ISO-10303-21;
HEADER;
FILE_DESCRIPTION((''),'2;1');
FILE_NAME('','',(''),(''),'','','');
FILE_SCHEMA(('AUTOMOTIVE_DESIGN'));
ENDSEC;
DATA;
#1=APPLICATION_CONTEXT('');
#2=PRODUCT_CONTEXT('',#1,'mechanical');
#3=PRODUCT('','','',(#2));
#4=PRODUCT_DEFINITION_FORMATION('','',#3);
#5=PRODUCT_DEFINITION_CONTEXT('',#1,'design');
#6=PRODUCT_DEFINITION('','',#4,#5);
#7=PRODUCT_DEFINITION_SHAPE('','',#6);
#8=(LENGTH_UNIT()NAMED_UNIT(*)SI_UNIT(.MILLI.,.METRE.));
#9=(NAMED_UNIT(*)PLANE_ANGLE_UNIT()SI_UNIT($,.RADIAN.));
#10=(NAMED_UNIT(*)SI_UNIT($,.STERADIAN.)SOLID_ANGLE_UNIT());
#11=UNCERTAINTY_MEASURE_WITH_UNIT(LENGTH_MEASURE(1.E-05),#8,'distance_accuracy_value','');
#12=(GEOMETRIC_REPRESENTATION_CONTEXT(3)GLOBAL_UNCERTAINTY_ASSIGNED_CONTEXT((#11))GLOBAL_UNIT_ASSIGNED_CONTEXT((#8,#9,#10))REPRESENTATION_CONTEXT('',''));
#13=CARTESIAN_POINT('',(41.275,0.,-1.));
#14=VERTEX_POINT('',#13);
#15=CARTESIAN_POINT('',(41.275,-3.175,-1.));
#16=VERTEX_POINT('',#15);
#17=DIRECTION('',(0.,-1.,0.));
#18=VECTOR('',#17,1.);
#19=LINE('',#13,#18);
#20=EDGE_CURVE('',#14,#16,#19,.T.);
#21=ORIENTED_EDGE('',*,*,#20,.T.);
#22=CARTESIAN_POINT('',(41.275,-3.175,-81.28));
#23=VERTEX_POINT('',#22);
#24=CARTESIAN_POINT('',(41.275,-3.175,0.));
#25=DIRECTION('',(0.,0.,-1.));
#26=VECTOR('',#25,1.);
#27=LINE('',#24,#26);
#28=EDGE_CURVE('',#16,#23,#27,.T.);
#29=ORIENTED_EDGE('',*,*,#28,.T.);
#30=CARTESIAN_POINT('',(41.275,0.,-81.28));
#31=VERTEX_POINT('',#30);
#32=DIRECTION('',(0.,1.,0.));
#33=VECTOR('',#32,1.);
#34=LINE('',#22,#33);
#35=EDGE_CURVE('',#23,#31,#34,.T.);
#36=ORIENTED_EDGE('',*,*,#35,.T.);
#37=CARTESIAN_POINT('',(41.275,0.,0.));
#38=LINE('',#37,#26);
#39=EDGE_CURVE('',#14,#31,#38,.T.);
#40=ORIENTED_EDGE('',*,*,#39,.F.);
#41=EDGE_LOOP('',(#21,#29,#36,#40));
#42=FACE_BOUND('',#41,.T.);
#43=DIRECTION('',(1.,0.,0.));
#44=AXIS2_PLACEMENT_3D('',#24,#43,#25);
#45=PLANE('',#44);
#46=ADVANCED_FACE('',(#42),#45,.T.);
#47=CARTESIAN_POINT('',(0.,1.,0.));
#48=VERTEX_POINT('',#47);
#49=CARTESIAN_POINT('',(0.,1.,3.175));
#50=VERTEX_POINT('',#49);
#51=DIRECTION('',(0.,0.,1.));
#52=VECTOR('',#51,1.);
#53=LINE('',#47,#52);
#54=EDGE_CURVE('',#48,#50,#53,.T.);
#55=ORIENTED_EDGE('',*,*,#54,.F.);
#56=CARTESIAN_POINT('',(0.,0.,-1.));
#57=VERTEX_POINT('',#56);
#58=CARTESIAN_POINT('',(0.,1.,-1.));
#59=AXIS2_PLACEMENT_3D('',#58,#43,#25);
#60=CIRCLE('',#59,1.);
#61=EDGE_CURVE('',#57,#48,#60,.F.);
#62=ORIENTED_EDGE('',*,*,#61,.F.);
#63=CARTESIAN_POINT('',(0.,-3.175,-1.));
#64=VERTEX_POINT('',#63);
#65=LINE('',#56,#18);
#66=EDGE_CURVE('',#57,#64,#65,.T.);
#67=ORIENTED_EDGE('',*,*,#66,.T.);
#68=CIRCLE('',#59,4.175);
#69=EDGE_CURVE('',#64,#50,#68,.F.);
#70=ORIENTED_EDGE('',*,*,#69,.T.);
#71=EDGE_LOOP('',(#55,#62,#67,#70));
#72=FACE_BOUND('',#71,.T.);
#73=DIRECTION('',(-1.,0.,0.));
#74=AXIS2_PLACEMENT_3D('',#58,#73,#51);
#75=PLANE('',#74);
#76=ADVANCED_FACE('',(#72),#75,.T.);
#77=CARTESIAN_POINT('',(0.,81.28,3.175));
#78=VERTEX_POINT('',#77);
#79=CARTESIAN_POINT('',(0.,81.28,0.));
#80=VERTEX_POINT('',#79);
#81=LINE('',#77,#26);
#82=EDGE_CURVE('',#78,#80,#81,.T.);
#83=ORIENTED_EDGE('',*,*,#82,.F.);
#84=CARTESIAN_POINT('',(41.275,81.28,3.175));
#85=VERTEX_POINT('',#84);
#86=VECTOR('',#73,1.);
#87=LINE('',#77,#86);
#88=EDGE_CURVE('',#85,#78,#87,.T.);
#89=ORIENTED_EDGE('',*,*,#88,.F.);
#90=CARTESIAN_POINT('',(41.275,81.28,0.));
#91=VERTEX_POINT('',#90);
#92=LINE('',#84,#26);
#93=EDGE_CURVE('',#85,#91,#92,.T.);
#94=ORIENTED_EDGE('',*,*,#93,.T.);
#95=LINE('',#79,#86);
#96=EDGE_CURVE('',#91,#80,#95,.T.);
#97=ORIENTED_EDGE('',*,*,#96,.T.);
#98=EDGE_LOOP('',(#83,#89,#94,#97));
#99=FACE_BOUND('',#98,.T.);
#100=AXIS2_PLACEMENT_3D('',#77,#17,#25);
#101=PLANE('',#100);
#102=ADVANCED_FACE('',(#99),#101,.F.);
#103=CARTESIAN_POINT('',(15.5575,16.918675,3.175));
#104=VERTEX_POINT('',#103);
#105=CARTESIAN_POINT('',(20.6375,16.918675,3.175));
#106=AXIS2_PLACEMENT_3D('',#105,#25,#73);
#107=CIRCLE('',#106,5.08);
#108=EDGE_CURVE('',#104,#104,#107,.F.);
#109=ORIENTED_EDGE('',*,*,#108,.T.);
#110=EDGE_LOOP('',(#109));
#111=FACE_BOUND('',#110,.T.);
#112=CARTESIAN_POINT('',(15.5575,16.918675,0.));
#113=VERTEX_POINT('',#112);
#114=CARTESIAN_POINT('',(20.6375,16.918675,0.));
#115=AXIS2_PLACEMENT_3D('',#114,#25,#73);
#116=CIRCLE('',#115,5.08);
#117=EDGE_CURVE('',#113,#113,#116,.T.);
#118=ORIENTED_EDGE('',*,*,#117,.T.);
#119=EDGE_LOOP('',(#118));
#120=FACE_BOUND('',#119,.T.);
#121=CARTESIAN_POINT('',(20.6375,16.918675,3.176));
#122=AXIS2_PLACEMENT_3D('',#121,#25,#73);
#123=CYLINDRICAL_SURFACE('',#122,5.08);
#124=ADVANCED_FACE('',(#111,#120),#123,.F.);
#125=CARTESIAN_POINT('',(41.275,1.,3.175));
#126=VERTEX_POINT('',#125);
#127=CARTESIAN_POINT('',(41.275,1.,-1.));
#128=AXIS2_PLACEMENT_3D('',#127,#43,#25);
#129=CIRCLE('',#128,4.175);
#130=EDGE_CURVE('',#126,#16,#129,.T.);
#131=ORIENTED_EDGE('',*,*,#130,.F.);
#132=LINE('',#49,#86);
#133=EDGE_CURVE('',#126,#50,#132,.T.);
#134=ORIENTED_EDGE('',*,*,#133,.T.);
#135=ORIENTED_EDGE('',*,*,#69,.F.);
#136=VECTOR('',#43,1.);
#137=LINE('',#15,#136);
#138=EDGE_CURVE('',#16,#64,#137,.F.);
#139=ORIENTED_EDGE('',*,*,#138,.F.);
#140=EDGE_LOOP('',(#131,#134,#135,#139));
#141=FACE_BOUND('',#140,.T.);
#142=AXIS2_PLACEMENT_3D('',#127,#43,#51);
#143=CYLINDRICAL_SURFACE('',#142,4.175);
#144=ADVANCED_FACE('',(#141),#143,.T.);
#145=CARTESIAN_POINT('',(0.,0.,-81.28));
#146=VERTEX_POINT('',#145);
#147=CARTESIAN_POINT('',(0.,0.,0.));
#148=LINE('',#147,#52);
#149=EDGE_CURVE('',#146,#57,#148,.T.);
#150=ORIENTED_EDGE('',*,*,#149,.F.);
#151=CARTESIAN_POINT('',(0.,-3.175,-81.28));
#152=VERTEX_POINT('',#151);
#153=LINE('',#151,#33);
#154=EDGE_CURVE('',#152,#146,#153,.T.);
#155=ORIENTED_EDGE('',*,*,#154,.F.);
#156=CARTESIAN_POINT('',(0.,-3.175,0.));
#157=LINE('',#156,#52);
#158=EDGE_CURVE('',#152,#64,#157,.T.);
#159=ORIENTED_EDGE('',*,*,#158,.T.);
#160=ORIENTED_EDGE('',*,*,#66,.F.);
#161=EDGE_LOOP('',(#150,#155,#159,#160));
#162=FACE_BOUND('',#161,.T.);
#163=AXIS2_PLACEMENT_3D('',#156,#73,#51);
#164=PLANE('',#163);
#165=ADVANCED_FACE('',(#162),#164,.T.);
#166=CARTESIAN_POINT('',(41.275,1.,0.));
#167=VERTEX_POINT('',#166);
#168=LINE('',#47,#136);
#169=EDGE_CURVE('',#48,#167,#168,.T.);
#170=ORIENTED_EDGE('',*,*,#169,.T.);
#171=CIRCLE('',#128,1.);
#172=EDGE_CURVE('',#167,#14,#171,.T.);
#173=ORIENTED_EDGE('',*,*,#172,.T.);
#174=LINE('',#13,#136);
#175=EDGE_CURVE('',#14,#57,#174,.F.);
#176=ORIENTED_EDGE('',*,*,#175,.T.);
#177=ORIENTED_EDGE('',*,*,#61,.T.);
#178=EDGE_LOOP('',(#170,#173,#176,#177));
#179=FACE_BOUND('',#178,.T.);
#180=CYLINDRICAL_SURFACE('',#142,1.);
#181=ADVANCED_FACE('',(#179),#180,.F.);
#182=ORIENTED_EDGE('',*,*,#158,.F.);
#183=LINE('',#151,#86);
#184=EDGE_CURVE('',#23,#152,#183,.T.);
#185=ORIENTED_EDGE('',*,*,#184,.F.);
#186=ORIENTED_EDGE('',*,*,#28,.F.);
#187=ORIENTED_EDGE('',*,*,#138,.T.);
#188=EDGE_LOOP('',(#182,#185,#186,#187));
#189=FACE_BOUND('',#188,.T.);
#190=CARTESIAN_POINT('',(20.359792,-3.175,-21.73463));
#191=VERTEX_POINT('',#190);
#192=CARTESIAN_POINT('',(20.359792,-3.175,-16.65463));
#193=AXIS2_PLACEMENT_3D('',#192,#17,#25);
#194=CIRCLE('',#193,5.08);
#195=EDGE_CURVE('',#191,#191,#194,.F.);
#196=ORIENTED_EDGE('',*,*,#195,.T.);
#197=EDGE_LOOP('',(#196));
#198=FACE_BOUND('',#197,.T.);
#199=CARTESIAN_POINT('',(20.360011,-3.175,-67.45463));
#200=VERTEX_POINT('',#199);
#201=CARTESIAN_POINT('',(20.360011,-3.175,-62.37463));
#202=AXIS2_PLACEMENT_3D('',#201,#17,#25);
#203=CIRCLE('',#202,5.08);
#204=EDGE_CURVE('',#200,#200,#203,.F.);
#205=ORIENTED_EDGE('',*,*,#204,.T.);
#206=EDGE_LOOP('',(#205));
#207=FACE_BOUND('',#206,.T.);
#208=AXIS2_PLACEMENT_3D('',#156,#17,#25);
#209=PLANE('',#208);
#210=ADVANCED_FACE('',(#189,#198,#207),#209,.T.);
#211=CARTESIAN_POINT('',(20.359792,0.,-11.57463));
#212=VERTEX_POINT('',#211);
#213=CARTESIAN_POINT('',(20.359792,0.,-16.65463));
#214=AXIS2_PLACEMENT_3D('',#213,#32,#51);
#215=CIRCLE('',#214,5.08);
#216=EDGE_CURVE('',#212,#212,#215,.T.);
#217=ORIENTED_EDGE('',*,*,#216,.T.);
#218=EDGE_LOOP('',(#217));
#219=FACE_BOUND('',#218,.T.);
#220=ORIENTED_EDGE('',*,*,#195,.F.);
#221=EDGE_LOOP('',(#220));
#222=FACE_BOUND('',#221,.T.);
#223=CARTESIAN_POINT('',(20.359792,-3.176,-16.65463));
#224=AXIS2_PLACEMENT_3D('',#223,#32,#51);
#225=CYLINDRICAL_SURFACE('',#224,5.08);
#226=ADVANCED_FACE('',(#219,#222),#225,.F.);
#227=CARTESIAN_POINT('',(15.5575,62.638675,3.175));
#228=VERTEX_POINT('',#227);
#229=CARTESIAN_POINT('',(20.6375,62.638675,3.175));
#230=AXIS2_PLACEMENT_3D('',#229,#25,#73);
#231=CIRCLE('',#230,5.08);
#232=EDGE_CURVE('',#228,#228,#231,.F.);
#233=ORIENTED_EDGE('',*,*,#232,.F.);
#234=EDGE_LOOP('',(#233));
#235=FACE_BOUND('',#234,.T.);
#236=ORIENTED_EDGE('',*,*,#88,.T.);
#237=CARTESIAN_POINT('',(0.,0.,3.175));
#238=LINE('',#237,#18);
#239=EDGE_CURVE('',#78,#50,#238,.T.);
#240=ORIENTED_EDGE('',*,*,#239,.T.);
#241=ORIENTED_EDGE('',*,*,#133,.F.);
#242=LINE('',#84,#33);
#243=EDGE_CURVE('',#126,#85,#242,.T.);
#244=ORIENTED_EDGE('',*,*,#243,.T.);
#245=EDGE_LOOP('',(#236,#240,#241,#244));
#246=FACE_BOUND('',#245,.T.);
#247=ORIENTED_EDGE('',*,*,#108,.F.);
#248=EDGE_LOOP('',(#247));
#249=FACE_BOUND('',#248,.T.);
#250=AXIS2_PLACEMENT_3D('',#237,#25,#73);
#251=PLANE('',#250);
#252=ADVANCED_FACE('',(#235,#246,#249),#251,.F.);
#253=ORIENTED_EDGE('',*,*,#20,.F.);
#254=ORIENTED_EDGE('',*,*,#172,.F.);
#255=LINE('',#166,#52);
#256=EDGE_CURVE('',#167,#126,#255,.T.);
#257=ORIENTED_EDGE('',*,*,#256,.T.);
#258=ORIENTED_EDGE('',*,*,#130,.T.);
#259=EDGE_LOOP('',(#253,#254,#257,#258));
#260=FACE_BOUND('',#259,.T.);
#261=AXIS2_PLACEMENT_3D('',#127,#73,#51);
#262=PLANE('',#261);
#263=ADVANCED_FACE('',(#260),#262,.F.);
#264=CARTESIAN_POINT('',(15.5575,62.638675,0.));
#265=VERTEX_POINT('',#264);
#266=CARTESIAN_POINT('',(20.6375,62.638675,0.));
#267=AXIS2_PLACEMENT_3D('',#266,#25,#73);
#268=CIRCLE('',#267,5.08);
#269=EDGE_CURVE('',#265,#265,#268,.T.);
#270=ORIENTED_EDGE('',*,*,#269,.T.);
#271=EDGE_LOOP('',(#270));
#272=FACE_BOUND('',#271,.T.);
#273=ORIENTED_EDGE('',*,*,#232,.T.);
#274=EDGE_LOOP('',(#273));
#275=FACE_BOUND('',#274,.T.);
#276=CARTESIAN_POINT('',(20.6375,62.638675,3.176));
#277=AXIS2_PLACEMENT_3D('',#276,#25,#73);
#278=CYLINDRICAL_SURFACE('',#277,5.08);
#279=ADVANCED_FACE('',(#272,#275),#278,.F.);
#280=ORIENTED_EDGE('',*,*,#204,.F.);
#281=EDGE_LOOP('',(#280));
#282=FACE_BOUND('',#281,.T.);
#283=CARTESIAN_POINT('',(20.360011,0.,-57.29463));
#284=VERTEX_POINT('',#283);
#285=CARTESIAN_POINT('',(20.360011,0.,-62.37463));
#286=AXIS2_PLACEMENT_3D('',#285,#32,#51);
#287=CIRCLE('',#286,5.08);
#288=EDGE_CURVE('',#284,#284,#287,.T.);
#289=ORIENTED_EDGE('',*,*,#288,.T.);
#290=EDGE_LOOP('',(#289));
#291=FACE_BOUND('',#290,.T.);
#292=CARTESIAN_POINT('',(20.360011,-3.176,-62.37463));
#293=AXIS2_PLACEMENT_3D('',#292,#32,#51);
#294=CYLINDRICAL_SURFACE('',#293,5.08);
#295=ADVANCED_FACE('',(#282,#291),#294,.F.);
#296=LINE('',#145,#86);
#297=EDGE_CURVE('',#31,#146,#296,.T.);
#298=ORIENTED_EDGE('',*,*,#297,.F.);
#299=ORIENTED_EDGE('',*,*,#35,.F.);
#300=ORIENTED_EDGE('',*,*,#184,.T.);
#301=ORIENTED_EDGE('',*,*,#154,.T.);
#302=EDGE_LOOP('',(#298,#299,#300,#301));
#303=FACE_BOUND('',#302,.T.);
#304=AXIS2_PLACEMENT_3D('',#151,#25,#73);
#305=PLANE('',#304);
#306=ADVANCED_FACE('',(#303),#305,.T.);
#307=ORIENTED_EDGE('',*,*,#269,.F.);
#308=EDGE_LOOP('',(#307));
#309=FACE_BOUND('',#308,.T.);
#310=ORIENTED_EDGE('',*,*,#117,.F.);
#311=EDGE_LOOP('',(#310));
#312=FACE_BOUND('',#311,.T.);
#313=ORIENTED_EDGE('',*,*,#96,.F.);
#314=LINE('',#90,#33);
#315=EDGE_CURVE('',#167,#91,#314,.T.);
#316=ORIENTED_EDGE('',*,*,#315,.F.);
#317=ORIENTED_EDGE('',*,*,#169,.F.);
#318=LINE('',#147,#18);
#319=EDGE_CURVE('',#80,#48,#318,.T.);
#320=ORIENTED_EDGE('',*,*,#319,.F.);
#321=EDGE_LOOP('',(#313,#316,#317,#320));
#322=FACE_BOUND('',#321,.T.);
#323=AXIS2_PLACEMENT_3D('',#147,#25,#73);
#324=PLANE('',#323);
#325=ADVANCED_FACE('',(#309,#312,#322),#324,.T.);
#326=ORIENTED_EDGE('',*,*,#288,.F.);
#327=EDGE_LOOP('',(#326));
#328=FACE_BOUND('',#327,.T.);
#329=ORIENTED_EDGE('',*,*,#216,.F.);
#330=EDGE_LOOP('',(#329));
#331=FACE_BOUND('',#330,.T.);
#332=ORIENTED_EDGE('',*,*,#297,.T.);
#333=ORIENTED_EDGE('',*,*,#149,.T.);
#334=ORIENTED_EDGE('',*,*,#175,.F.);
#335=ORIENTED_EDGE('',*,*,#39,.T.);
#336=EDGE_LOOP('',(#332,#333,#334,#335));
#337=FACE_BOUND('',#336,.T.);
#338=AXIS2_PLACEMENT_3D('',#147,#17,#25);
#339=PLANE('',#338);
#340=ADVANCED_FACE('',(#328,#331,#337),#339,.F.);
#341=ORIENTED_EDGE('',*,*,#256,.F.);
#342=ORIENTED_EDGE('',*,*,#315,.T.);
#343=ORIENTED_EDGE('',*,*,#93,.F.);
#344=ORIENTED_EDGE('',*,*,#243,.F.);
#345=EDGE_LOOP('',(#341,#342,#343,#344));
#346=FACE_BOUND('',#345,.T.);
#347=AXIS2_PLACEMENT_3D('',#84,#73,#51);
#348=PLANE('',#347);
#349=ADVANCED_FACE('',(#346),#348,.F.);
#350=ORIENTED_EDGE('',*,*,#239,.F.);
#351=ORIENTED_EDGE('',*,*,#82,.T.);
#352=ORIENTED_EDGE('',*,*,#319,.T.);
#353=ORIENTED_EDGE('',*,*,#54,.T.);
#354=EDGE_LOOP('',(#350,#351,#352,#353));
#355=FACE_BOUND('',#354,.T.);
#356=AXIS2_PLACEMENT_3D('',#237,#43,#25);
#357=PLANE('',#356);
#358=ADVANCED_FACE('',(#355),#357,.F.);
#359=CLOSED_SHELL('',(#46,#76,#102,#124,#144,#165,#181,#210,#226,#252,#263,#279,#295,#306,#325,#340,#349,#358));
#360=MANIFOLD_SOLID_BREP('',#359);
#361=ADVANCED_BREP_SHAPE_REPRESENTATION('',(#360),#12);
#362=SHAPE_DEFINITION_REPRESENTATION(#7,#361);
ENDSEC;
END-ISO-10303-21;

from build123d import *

# Parameters (mm, degrees)
SKETCH2_W                    = 41.275
SKETCH2_H                    = 81.28
BASE_FLANGE1_DEPTH           = 3.175
EDGE_FLANGE1_STRIP_W         = 14.7
EDGE_FLANGE1_STRIP_H         = 3.175
EDGE_FLANGE1_STRIP_CUT_DEPTH = 41.275
EDGE_FLANGE1_DEPTH           = 41.275
CUT_EXTRUDE1_REACH           = 124.133
SKETCH10_R                   = 5.08
CUT_EXTRUDE3_REACH           = 124.133
SKETCH12_R                   = 5.08


# Sheet-metal steps are written as plain solids
with BuildPart() as part:
    # Sketch2 → Base-Flange1 (new body)
    with BuildSketch(Plane(origin=(0, 0, 0), x_dir=(1, 0, 0), z_dir=(0, 1, 0))):
        with Locations((20.6375, 40.64)):
            Rectangle(SKETCH2_W, SKETCH2_H)
    extrude(amount=-BASE_FLANGE1_DEPTH)

    # Edge-Flange1 strip (across the edge) → Edge-Flange1 strip cut (cut)
    with BuildSketch(Plane(origin=(0, 0, 0), x_dir=(0, 0, -1), z_dir=(1, 0, 0))):
        with Locations((-6.35, -1.5875)):
            Rectangle(EDGE_FLANGE1_STRIP_W, EDGE_FLANGE1_STRIP_H)
    extrude(amount=EDGE_FLANGE1_STRIP_CUT_DEPTH, mode=Mode.SUBTRACT)

    # Edge-Flange1 section (across the edge) → Edge-Flange1 (add)
    with BuildSketch(Plane(origin=(0, 0, 0), x_dir=(0, 0, -1), z_dir=(1, 0, 0))):
        with BuildLine():
            Line((-3.175, 1), (-3.175, 81.28))
            Line((-3.175, 81.28), (0, 81.28))
            Line((0, 81.28), (0, 1))
            ThreePointArc((0, 1), (0.292893219, 0.292893219), (1, 0))
            Line((1, 0), (1, -3.175))
            ThreePointArc((1, -3.175), (-1.952170811, -1.952170811), (-3.175, 1))
        make_face()
    extrude(amount=EDGE_FLANGE1_DEPTH)

    # Sketch10 → Cut-Extrude1 (cut, up to next)
    with BuildSketch(Plane(origin=(0, 0, 0), x_dir=(-1, 0, 0), z_dir=(0, 0, -1)), mode=Mode.PRIVATE) as cut_extrude1_sk1:
        with Locations((-20.6375, 62.638675326)):
            Circle(SKETCH10_R)
    cut_extrude1_tool1 = extrude(cut_extrude1_sk1.sketch, amount=-CUT_EXTRUDE1_REACH, mode=Mode.PRIVATE) & part.part
    # Sketch10 → Cut-Extrude1 (cut, up to next)
    with BuildSketch(Plane(origin=(0, 0, 0), x_dir=(-1, 0, 0), z_dir=(0, 0, -1)), mode=Mode.PRIVATE) as cut_extrude1_sk2:
        with Locations((-20.6375, 16.918675326)):
            Circle(SKETCH10_R)
    cut_extrude1_tool2 = extrude(cut_extrude1_sk2.sketch, amount=-CUT_EXTRUDE1_REACH, mode=Mode.PRIVATE) & part.part
    add(cut_extrude1_tool1.solids().sort_by_distance((20.6375, 62.638675, 0))[0], mode=Mode.SUBTRACT)
    add(cut_extrude1_tool2.solids().sort_by_distance((20.6375, 16.918675, 0))[0], mode=Mode.SUBTRACT)

    # Sketch12 → Cut-Extrude3 (cut, up to next)
    with BuildSketch(Plane(origin=(0, 0, 0), x_dir=(1, 0, 0), z_dir=(0, 1, 0)), mode=Mode.PRIVATE) as cut_extrude3_sk1:
        with Locations(Location((20.359792254, 16.65462957, 0), (0, 0, 270))):
            Circle(SKETCH12_R)
    cut_extrude3_tool1 = extrude(cut_extrude3_sk1.sketch, amount=-CUT_EXTRUDE3_REACH, mode=Mode.PRIVATE) & part.part
    # Sketch12 → Cut-Extrude3 (cut, up to next)
    with BuildSketch(Plane(origin=(0, 0, 0), x_dir=(1, 0, 0), z_dir=(0, 1, 0)), mode=Mode.PRIVATE) as cut_extrude3_sk2:
        with Locations(Location((20.360011307, 62.374629569, 0), (0, 0, 270))):
            Circle(SKETCH12_R)
    cut_extrude3_tool2 = extrude(cut_extrude3_sk2.sketch, amount=-CUT_EXTRUDE3_REACH, mode=Mode.PRIVATE) & part.part
    add(cut_extrude3_tool1.solids().sort_by_distance((20.359792, 0, -16.65463))[0], mode=Mode.SUBTRACT)
    add(cut_extrude3_tool2.solids().sort_by_distance((20.360011, 0, -62.37463))[0], mode=Mode.SUBTRACT)


solid = part.part
